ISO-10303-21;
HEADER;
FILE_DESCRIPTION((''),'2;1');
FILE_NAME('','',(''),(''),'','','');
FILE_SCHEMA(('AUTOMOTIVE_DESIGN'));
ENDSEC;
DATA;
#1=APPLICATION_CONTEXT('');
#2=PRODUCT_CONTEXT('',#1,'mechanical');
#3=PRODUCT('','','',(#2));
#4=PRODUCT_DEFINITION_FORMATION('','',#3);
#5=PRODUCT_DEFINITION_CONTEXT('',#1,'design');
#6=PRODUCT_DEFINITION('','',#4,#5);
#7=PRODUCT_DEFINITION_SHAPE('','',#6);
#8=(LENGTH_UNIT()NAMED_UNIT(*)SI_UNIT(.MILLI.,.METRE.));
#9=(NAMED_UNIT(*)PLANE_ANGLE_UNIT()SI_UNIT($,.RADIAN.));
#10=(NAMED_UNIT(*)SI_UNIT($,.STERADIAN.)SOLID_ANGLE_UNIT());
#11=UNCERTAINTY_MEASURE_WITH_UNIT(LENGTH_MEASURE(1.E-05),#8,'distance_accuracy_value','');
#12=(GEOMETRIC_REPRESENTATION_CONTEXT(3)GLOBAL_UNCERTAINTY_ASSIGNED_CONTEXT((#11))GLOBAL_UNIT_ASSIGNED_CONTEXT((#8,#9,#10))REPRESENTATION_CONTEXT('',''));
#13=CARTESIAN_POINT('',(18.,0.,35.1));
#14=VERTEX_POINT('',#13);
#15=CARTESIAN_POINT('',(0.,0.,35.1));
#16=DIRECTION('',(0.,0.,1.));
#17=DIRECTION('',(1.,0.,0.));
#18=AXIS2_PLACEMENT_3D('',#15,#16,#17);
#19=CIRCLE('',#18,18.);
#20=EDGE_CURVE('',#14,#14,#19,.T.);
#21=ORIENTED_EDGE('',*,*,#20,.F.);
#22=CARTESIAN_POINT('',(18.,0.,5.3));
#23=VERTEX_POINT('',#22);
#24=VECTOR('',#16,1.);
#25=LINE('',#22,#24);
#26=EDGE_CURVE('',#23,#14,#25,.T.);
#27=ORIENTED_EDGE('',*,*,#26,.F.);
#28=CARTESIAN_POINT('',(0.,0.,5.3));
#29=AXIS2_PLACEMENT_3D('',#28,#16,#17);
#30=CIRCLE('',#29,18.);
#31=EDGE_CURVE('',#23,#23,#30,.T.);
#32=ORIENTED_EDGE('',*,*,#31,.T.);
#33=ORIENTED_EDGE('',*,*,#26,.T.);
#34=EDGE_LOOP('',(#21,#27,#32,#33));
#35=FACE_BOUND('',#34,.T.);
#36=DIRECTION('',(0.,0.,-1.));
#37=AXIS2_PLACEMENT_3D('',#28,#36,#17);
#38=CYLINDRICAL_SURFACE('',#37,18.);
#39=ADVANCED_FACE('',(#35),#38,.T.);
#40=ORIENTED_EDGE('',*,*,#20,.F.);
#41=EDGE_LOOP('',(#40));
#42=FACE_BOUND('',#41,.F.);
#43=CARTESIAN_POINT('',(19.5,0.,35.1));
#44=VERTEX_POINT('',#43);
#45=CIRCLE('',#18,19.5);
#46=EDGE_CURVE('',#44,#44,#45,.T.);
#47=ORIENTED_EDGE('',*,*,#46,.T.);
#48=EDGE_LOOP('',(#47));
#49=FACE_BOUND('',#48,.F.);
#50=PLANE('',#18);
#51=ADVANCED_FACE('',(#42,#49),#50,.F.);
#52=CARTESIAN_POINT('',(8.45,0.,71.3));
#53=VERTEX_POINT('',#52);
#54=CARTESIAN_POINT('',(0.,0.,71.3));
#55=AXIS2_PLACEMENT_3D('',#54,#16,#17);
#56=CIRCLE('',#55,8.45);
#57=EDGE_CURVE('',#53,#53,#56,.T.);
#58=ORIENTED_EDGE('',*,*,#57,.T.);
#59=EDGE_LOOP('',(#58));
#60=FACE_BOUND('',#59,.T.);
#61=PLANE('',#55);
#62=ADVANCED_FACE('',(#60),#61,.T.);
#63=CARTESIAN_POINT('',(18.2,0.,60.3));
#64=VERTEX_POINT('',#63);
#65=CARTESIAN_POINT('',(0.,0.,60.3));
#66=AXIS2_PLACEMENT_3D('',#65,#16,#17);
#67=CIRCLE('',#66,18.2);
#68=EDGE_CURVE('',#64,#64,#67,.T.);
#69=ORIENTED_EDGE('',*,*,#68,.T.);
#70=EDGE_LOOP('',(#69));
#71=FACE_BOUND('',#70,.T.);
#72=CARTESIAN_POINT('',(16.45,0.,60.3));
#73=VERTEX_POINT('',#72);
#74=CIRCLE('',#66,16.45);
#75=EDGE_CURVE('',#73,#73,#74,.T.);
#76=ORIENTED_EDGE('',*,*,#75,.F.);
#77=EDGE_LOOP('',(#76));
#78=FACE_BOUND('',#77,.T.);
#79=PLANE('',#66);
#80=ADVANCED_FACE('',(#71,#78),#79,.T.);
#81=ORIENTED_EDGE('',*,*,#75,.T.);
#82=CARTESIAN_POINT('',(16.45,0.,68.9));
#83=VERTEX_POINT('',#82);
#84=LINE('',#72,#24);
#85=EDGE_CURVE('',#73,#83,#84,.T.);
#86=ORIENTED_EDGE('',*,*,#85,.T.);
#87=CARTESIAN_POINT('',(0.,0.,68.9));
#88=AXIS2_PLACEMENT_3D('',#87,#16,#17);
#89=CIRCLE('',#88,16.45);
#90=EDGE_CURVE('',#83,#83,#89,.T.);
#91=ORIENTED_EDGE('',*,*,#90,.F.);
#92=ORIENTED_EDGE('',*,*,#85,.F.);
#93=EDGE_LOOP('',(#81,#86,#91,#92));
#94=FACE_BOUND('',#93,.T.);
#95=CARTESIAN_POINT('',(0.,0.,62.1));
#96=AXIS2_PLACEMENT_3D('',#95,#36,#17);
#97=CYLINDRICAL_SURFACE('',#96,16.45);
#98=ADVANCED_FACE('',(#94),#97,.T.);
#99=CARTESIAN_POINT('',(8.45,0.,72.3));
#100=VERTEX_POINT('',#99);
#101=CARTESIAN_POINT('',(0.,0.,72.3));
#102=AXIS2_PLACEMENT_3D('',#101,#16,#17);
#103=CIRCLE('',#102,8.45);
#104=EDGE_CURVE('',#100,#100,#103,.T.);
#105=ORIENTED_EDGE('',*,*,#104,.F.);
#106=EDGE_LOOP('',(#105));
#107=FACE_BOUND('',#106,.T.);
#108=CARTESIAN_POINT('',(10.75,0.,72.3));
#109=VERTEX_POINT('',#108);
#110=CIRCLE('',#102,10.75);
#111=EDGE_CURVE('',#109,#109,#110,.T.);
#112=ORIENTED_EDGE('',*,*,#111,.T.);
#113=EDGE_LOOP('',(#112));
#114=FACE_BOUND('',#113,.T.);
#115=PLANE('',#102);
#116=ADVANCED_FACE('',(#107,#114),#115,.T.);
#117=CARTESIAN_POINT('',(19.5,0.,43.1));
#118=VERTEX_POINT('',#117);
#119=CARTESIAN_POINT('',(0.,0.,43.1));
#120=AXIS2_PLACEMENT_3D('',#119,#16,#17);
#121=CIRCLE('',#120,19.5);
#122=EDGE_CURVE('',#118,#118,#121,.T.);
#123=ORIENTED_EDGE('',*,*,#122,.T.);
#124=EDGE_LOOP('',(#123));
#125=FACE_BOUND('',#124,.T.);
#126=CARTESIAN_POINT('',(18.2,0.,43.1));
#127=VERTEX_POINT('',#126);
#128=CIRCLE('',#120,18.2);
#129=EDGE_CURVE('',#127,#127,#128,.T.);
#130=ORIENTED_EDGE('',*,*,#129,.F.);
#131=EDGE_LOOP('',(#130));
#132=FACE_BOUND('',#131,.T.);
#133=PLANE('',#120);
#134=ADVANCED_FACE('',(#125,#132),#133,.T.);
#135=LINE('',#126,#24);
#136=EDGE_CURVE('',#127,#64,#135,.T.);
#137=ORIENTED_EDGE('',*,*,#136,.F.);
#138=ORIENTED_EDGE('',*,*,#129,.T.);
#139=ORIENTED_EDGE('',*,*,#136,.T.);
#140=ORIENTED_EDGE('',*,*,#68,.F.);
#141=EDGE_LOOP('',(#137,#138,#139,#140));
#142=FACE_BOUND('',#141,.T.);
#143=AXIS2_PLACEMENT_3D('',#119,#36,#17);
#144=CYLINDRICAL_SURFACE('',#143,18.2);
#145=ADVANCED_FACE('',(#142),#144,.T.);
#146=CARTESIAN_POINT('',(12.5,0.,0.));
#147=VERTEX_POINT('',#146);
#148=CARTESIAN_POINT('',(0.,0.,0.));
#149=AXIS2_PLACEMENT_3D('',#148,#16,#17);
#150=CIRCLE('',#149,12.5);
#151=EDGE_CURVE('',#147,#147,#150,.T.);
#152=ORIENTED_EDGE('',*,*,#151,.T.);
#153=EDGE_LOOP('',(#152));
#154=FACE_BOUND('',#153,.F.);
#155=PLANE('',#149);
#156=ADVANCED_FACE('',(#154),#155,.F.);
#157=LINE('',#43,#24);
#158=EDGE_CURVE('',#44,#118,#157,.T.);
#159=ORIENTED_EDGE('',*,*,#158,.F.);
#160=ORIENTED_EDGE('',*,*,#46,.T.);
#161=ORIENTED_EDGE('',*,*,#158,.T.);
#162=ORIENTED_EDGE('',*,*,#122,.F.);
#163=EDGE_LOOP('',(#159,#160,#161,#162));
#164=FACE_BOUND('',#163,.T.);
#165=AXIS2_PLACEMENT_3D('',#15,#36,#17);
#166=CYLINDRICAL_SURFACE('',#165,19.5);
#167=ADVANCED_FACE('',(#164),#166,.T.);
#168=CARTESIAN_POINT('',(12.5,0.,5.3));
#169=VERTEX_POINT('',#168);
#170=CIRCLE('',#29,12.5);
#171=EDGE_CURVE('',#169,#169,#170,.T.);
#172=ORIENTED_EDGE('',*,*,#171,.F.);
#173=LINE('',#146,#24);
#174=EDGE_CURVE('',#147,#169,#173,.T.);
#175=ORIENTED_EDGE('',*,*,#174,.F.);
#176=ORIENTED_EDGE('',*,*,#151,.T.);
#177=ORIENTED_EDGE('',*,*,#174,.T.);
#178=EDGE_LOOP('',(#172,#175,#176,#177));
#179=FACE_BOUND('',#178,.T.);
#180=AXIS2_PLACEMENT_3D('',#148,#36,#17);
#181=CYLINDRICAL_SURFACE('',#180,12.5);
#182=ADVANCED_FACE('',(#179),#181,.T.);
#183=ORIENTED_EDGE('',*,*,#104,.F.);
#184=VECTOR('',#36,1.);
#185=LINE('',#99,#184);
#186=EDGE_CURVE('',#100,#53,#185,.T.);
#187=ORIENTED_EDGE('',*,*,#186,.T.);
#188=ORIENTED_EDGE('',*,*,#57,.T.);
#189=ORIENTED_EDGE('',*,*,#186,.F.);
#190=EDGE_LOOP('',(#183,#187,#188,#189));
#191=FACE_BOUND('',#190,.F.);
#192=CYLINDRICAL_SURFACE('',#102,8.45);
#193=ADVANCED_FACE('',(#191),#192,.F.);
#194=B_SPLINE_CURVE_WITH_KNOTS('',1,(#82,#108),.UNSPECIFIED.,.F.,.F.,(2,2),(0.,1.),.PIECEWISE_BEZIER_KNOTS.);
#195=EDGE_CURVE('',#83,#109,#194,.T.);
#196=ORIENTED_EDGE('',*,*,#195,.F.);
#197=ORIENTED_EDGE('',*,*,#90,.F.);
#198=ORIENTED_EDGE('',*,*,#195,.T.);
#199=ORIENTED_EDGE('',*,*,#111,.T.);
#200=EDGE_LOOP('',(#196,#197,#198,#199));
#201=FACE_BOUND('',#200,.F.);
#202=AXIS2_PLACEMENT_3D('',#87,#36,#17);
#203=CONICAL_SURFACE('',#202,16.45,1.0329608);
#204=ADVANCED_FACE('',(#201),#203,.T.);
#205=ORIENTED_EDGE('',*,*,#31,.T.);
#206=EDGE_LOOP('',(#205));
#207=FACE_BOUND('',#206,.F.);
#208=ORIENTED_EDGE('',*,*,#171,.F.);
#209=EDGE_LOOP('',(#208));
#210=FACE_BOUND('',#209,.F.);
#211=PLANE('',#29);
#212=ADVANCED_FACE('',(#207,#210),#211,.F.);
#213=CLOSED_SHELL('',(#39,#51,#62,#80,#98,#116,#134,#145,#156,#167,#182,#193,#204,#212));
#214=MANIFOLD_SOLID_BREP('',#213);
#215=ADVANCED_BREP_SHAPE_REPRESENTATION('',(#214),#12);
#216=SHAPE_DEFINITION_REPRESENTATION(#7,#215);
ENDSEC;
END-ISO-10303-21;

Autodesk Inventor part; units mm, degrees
ref_plane "YZ Plane" through (0, 0, 0) normal (1, 0, 0) x (0, 1, 0)
ref_plane "XZ Plane" through (0, 0, 0) normal (0, 1, 0) x (-1, 0, 0)
sketch "Sketch1" plane through (0, 0, 0) normal (0, 0, 1) x (1, 0, 0)
  circle A0 centre (0, 0) radius 12.5
  dimension "d0" = 25
extrude "Extrusion1" add sketch "Sketch1" along normal blind 5.3
sketch "Sketch2" plane through (0, 0, 5.3) normal (0, 0, 1) x (1, 0, 0)
  circle A0 centre (0, 0) radius 18
  dimension "d3" = 36
extrude "Extrusion2" add sketch "Sketch2" along normal blind 29.8
sketch "Sketch3" plane through (0, 0, 35.1) normal (0, 0, 1) x (1, 0, 0)
  circle A0 centre (0, 0) radius 19.5
  dimension "d6" = 39
extrude "Extrusion3" add sketch "Sketch3" along normal blind 8
sketch "Sketch4" plane through (0, 0, 43.1) normal (0, 0, 1) x (1, 0, 0)
  circle A0 centre (0, 0) radius 18.2
  dimension "d9" = 36.4
extrude "Extrusion4" add sketch "Sketch4" along normal blind 17.2
sketch "Sketch5" plane through (0, 0, 60.3) normal (0, 0, 1) x (1, 0, 0)
  circle A0 centre (0, 0) radius 16.45
  dimension "d12" = 32.9
extrude "Extrusion5" add sketch "Sketch5" along normal blind 1.8
sketch "Sketch6" plane through (0, 0, 62.1) normal (0, 0, 1) x (1, 0, 0)
  circle A0 centre (0, 0) radius 16.45
  dimension "d15" = 32.9
extrude "Extrusion6" add sketch "Sketch6" along normal blind 6.8
sketch "Sketch7" plane through (0, 0, 68.9) normal (0, 0, 1) x (1, 0, 0)
  circle A0 centre (0, 0) radius 16.45
  dimension "d18" = 32.9
ref_plane "Work Plane1" through (0, 0, 72.3) normal (0, 0, 1) x (1, 0, 0)
sketch "Sketch8" plane through (0, 0, 72.3) normal (0, 0, 1) x (1, 0, 0)
  circle A0 centre (0, 0) radius 10.75
  dimension "d20" = 21.5
loft "Loft1" add profiles "Sketch8" section 1 edges at (-16.45, 0, 68.9)
sketch "Sketch9" plane through (0, 0, 72.3) normal (0, 0, 1) x (1, 0, 0)
  circle A0 centre (0, 0) radius 8.45
  dimension "d25" = 16.9
extrude "Extrusion7" cut sketch "Sketch9" against normal blind 1
properties part number "olympusXLSLPLN25XGMP_vFIN"
